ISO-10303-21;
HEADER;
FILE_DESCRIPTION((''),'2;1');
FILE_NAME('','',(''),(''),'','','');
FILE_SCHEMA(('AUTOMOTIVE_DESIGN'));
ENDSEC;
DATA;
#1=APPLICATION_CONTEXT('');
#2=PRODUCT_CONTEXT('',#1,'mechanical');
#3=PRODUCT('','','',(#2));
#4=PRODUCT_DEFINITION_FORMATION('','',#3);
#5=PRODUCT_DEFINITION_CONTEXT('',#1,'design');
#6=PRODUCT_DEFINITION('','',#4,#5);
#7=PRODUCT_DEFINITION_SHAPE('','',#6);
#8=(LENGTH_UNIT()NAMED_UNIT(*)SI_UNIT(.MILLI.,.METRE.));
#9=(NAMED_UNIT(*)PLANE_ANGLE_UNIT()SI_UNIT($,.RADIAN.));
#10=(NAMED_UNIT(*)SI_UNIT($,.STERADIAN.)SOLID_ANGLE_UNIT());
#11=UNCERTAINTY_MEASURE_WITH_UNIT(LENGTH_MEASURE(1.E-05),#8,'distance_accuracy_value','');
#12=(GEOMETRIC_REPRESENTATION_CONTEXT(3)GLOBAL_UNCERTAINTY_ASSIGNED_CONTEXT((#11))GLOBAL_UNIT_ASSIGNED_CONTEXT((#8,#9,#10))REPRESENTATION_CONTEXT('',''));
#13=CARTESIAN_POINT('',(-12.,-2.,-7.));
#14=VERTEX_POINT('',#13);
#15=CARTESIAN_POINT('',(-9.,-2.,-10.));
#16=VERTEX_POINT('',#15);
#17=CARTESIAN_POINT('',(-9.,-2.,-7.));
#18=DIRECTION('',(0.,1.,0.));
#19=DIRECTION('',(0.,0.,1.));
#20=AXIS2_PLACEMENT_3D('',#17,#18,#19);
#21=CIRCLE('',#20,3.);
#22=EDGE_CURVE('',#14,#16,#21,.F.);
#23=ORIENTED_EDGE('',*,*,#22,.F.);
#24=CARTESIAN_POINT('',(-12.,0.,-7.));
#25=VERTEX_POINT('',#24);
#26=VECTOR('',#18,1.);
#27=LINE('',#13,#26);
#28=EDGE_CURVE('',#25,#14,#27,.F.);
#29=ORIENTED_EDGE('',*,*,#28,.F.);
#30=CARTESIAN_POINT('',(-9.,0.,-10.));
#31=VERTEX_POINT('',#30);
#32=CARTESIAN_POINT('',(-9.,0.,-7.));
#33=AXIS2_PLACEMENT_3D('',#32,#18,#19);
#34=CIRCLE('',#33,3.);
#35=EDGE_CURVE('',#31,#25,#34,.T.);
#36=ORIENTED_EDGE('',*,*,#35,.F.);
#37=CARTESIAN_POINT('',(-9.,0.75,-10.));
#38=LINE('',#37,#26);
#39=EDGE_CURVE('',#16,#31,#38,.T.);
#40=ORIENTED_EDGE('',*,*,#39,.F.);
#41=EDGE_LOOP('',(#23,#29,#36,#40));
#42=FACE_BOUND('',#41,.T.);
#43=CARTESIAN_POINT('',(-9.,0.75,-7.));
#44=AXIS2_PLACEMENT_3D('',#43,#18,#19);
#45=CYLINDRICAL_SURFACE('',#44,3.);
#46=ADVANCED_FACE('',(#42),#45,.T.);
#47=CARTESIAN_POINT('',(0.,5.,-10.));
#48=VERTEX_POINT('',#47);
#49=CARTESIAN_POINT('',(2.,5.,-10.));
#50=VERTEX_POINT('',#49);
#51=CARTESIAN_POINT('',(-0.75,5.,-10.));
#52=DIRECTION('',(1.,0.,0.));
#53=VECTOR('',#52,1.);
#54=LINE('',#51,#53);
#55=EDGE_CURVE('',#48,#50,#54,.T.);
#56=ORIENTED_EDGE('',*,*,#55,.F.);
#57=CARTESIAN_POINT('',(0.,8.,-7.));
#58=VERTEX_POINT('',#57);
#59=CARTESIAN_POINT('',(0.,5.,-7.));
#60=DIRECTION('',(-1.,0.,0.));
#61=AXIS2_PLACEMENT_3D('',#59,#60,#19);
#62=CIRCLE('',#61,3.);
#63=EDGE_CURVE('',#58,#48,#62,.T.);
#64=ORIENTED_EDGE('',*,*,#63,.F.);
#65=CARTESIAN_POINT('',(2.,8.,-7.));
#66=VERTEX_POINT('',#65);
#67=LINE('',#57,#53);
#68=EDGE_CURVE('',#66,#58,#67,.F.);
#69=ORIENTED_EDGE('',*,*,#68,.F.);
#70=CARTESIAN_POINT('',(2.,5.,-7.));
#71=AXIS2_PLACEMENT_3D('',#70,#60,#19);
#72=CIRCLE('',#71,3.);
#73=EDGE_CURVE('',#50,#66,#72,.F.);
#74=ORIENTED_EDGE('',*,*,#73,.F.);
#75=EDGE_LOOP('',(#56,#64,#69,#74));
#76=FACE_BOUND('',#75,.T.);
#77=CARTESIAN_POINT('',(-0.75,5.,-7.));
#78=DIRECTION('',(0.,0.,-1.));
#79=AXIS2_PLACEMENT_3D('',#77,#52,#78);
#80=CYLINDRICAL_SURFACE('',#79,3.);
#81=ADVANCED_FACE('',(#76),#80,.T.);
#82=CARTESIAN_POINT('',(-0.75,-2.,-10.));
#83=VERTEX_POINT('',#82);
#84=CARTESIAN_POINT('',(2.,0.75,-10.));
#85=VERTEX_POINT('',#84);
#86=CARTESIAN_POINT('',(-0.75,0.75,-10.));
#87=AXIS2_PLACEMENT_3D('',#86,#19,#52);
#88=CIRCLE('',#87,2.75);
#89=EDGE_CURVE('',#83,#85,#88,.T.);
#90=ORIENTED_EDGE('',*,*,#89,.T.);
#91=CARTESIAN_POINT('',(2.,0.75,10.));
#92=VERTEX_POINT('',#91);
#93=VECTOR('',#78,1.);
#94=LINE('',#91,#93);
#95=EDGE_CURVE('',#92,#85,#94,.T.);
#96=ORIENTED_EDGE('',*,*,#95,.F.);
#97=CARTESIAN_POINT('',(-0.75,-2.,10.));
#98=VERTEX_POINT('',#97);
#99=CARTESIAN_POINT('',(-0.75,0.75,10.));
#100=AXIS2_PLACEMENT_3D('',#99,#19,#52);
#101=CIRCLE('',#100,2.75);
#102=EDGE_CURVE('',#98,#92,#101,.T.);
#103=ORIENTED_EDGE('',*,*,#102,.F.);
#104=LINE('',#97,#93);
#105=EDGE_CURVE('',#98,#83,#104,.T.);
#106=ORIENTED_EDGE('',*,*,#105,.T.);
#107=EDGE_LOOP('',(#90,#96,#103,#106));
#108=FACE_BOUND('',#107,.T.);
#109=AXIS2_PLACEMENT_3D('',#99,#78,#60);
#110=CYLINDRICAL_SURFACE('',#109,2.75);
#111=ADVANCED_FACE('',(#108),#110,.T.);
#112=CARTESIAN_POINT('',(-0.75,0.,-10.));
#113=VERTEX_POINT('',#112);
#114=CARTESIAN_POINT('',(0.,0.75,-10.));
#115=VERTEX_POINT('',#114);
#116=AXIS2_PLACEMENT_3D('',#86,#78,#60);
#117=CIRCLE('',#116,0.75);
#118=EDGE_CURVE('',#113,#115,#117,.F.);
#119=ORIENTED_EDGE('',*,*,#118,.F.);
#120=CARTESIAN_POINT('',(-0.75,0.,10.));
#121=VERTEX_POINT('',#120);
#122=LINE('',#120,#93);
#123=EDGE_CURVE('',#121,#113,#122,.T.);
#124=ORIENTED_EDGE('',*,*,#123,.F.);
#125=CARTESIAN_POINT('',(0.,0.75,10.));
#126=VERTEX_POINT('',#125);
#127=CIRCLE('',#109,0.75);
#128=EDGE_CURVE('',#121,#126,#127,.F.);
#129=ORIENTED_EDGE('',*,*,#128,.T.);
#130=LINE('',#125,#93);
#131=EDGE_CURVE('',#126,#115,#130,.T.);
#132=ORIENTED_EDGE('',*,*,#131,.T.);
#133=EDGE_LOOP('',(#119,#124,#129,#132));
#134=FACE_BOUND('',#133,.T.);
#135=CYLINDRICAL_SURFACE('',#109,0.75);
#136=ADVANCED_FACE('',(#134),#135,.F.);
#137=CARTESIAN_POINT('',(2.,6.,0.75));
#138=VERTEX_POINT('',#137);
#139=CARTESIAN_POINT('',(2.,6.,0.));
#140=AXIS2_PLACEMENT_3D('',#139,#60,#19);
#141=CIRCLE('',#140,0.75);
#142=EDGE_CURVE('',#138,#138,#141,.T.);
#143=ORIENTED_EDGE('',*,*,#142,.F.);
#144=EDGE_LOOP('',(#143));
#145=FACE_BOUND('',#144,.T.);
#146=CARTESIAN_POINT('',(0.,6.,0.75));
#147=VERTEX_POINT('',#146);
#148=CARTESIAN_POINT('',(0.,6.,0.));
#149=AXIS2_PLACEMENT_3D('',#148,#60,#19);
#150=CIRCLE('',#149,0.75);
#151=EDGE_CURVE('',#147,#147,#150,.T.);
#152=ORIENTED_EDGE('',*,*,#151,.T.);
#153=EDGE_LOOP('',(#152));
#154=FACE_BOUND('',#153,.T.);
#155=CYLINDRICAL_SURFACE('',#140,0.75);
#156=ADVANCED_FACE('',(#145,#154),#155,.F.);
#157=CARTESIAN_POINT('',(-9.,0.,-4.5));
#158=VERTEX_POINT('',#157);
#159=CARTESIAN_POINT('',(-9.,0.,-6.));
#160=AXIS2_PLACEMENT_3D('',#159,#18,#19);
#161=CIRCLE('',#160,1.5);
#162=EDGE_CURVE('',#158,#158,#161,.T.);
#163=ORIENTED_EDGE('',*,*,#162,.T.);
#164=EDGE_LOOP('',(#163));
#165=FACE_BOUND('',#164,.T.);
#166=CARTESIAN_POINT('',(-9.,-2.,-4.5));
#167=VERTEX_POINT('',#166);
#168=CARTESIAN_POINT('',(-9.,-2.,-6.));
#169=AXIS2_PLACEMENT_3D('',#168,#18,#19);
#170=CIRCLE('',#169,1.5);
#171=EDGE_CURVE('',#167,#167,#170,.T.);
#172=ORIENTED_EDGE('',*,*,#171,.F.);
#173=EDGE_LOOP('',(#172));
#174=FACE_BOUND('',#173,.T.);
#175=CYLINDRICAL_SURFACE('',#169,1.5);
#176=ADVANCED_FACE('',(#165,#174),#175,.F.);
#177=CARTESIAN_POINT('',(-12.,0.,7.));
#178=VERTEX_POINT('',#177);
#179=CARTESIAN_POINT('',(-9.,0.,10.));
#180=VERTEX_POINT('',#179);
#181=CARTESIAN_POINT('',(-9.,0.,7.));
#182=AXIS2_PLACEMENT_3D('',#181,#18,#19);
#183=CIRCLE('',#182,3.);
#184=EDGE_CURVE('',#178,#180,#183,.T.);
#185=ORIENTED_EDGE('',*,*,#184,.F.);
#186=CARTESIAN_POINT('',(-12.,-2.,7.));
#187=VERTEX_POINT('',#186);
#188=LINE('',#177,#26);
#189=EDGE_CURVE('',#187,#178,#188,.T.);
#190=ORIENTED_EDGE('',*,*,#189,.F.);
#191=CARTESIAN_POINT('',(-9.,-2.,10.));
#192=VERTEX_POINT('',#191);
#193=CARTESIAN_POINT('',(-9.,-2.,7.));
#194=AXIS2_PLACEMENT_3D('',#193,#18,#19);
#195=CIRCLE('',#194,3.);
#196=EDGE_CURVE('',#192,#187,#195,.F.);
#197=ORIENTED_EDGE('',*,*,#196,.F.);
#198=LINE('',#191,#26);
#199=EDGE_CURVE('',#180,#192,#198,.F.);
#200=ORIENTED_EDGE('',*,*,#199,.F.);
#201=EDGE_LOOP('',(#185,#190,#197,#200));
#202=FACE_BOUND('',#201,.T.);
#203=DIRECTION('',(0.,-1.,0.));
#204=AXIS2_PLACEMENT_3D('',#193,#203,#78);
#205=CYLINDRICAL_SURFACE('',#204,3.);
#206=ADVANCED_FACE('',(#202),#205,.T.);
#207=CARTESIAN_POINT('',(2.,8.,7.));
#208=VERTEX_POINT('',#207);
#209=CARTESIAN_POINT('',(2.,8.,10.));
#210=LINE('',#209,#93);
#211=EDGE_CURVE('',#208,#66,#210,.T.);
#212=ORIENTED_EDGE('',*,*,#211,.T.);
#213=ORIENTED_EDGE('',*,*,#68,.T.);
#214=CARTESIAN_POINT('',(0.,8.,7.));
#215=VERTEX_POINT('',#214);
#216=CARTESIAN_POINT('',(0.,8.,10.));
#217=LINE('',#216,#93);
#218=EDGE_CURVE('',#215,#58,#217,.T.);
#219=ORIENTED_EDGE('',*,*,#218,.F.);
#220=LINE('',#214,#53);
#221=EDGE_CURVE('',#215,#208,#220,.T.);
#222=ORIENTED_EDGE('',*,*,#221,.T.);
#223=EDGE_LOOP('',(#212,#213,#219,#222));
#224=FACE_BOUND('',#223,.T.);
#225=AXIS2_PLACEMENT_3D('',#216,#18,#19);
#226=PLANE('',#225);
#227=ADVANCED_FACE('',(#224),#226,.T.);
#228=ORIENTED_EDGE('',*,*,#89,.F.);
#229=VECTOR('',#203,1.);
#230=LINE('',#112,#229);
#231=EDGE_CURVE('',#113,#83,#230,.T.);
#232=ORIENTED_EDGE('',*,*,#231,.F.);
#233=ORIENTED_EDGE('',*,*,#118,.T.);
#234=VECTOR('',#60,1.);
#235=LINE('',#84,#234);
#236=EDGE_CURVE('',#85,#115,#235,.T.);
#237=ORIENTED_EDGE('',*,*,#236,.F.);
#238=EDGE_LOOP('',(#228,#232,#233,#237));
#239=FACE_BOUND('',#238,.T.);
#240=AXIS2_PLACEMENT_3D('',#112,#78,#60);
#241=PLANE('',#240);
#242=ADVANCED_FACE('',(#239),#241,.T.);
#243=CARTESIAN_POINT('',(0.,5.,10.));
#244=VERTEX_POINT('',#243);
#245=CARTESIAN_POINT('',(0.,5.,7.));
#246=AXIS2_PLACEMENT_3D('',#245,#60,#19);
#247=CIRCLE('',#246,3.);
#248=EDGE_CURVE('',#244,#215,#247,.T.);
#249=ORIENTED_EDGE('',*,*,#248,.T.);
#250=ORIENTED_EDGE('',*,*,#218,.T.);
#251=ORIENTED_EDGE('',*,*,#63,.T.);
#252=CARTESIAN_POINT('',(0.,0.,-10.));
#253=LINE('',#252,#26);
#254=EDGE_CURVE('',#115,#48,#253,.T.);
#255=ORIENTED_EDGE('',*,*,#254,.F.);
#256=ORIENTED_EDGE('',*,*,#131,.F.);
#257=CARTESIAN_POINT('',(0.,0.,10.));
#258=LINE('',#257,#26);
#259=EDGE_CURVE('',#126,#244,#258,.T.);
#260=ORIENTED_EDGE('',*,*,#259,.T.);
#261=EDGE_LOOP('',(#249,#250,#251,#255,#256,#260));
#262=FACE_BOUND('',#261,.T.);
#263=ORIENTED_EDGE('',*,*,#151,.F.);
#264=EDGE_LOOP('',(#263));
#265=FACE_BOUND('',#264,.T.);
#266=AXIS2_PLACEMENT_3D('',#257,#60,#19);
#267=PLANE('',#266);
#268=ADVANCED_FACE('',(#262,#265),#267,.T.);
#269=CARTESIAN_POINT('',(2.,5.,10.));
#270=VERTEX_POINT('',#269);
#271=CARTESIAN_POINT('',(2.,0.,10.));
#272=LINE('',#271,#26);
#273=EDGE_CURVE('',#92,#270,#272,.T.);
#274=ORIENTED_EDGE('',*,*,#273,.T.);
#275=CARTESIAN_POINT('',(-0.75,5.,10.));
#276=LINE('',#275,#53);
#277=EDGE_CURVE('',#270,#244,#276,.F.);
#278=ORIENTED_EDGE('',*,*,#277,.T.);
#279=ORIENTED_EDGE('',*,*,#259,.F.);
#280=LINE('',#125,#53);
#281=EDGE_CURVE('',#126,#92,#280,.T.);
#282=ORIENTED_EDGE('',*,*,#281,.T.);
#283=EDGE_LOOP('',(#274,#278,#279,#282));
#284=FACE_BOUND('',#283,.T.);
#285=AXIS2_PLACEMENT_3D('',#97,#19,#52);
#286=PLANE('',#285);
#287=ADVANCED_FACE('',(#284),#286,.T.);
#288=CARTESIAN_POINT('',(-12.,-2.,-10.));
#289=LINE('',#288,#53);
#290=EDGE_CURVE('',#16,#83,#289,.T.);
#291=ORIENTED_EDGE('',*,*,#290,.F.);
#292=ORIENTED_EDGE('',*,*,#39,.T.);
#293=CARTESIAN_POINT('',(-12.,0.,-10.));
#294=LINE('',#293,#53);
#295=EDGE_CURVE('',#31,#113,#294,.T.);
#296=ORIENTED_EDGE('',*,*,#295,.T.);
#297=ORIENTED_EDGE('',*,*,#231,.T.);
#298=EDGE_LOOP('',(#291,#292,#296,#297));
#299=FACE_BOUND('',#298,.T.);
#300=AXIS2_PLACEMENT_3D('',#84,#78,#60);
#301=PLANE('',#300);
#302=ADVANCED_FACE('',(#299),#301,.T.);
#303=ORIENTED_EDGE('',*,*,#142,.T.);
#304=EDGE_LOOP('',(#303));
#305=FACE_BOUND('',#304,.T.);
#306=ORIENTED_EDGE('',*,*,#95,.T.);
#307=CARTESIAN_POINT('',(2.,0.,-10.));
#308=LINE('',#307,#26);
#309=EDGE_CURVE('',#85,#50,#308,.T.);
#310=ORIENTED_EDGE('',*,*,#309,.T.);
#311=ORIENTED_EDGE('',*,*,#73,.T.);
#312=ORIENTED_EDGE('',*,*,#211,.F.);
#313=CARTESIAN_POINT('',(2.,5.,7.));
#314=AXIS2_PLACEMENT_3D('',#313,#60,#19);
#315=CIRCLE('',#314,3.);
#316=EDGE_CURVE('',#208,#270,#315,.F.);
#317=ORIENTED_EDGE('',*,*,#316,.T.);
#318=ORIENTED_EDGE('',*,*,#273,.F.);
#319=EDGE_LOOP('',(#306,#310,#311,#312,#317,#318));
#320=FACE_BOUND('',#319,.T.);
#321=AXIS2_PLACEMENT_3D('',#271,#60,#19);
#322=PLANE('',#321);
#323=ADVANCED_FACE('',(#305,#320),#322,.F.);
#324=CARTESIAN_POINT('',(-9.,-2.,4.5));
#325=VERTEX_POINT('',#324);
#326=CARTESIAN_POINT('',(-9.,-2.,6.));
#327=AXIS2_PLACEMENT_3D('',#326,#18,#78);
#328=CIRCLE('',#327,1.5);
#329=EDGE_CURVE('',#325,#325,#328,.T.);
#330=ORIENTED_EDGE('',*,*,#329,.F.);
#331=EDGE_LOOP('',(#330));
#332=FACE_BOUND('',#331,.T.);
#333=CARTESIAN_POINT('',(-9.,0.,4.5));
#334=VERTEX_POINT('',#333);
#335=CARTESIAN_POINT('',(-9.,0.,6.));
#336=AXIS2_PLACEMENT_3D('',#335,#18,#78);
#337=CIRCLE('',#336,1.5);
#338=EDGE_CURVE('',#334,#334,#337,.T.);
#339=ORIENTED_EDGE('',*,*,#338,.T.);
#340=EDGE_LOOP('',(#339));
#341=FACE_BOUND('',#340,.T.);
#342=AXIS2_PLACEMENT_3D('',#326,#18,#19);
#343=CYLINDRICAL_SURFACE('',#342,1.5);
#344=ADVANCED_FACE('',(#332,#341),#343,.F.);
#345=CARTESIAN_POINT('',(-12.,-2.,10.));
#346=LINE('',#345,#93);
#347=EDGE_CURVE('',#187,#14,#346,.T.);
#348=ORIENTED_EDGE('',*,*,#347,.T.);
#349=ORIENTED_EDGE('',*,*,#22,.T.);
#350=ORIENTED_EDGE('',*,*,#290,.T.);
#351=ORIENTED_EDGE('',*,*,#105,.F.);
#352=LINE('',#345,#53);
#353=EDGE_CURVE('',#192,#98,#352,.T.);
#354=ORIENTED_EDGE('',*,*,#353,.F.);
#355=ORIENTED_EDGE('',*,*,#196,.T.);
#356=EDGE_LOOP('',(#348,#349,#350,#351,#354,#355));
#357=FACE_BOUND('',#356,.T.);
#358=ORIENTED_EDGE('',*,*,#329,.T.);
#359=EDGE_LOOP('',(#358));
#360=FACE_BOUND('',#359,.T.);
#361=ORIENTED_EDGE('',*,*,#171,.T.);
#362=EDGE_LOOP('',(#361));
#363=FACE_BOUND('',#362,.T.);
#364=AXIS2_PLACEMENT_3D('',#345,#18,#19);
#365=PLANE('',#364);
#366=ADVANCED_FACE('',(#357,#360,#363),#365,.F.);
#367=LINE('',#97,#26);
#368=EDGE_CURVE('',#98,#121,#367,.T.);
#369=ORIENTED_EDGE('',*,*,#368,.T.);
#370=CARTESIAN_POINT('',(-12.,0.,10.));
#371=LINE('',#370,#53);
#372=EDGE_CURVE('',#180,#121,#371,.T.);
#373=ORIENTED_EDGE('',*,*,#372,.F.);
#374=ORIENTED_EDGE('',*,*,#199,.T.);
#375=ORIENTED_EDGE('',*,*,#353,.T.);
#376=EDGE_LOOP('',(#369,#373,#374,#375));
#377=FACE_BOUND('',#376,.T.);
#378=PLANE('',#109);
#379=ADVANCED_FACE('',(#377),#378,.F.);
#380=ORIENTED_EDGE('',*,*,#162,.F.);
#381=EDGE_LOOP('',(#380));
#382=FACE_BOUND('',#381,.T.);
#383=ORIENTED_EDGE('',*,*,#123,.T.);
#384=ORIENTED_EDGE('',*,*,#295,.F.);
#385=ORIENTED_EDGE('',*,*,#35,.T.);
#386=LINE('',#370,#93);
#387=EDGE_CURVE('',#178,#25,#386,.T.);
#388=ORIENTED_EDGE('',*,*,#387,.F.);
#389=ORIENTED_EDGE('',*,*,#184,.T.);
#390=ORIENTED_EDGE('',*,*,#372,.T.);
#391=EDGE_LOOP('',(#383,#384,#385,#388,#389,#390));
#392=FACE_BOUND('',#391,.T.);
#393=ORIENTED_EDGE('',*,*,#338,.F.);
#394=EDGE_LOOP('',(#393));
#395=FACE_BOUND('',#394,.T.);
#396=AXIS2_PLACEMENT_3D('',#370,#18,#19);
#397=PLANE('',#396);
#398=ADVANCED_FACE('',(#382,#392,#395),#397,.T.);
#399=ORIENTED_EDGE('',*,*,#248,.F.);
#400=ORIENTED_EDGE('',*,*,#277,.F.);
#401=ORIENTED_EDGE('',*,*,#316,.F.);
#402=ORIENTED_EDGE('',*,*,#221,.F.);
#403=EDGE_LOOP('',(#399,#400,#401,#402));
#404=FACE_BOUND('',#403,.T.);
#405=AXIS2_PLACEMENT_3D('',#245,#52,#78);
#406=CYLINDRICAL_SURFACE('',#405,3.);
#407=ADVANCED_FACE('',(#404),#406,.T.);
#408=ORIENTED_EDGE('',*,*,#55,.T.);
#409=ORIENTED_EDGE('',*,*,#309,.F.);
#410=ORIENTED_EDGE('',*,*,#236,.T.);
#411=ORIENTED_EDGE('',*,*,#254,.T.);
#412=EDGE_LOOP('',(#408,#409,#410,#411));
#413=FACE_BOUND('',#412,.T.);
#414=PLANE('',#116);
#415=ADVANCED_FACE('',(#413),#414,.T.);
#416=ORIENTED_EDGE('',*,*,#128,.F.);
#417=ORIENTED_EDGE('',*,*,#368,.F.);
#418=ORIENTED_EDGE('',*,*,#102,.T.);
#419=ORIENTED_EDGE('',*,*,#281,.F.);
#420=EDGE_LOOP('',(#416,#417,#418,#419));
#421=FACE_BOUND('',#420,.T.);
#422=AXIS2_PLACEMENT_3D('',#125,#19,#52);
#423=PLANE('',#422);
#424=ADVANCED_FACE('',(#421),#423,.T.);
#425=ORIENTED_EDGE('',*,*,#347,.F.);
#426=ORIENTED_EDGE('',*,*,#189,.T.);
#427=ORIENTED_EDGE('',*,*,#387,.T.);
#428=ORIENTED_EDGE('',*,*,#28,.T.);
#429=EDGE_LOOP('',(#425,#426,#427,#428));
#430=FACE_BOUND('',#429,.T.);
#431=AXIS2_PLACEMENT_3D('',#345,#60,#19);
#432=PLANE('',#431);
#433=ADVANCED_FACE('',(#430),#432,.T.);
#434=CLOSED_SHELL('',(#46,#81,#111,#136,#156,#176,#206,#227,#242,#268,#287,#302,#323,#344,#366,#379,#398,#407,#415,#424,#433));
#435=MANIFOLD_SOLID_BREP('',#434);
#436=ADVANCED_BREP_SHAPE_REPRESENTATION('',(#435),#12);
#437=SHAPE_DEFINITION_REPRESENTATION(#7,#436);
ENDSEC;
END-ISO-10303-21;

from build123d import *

# Parameters (mm, degrees)
BASE_FLANGE1_DEPTH = 10
FILLET1_R          = 3
SKETCH6_R          = 1.5
CUT_EXTRUDE1_DEPTH = 18.549928775
SKETCH7_R          = 0.75
CUT_EXTRUDE2_DEPTH = 18.549928775


# Sheet-metal steps are written as plain solids
with BuildPart() as part:
    # Sketch1 → Base-Flange1 (new, symmetric)
    with BuildSketch(Plane.XY):
        with BuildLine():
            Line((-12, 0), (-0.75, 0))
            ThreePointArc((-0.75, 0), (-0.219669914, 0.219669914), (0, 0.75))
            Line((0, 0.75), (0, 8))
            Line((0, 8), (2, 8))
            Line((2, 8), (2, 0.75))
            ThreePointArc((2, 0.75), (1.194543648, -1.194543648), (-0.75, -2))
            Line((-0.75, -2), (-12, -2))
            Line((-12, -2), (-12, 0))
        make_face()
    extrude(amount=BASE_FLANGE1_DEPTH, both=True)

    # Fillet1
    fillet1_edges = [part.edges().sort_by_distance(p)[0] for p in [
        (-12, -1, 10),
        (-12, -1, -10),
        (1, 8, 10),
        (1, 8, -10),
    ]]
    fillet(fillet1_edges, radius=FILLET1_R)

    # Sketch6 → Cut-Extrude1 (cut, through all)
    with BuildSketch(Plane(origin=(0, 0, 0), x_dir=(1, 0, 0), z_dir=(0, 1, 0))):
        with Locations(Location((-9, 6, 0), (0, 0, 270))):
            Circle(SKETCH6_R)
        with Locations(Location((-9, -6, 0), (0, 0, 90))):
            Circle(SKETCH6_R)
    extrude(amount=-CUT_EXTRUDE1_DEPTH, mode=Mode.SUBTRACT)

    # Sketch7 → Cut-Extrude2 (cut, through all)
    with BuildSketch(Plane.ZY):
        with Locations((0, 6)):
            Circle(SKETCH7_R)
    extrude(amount=-CUT_EXTRUDE2_DEPTH, mode=Mode.SUBTRACT)


solid = part.part
